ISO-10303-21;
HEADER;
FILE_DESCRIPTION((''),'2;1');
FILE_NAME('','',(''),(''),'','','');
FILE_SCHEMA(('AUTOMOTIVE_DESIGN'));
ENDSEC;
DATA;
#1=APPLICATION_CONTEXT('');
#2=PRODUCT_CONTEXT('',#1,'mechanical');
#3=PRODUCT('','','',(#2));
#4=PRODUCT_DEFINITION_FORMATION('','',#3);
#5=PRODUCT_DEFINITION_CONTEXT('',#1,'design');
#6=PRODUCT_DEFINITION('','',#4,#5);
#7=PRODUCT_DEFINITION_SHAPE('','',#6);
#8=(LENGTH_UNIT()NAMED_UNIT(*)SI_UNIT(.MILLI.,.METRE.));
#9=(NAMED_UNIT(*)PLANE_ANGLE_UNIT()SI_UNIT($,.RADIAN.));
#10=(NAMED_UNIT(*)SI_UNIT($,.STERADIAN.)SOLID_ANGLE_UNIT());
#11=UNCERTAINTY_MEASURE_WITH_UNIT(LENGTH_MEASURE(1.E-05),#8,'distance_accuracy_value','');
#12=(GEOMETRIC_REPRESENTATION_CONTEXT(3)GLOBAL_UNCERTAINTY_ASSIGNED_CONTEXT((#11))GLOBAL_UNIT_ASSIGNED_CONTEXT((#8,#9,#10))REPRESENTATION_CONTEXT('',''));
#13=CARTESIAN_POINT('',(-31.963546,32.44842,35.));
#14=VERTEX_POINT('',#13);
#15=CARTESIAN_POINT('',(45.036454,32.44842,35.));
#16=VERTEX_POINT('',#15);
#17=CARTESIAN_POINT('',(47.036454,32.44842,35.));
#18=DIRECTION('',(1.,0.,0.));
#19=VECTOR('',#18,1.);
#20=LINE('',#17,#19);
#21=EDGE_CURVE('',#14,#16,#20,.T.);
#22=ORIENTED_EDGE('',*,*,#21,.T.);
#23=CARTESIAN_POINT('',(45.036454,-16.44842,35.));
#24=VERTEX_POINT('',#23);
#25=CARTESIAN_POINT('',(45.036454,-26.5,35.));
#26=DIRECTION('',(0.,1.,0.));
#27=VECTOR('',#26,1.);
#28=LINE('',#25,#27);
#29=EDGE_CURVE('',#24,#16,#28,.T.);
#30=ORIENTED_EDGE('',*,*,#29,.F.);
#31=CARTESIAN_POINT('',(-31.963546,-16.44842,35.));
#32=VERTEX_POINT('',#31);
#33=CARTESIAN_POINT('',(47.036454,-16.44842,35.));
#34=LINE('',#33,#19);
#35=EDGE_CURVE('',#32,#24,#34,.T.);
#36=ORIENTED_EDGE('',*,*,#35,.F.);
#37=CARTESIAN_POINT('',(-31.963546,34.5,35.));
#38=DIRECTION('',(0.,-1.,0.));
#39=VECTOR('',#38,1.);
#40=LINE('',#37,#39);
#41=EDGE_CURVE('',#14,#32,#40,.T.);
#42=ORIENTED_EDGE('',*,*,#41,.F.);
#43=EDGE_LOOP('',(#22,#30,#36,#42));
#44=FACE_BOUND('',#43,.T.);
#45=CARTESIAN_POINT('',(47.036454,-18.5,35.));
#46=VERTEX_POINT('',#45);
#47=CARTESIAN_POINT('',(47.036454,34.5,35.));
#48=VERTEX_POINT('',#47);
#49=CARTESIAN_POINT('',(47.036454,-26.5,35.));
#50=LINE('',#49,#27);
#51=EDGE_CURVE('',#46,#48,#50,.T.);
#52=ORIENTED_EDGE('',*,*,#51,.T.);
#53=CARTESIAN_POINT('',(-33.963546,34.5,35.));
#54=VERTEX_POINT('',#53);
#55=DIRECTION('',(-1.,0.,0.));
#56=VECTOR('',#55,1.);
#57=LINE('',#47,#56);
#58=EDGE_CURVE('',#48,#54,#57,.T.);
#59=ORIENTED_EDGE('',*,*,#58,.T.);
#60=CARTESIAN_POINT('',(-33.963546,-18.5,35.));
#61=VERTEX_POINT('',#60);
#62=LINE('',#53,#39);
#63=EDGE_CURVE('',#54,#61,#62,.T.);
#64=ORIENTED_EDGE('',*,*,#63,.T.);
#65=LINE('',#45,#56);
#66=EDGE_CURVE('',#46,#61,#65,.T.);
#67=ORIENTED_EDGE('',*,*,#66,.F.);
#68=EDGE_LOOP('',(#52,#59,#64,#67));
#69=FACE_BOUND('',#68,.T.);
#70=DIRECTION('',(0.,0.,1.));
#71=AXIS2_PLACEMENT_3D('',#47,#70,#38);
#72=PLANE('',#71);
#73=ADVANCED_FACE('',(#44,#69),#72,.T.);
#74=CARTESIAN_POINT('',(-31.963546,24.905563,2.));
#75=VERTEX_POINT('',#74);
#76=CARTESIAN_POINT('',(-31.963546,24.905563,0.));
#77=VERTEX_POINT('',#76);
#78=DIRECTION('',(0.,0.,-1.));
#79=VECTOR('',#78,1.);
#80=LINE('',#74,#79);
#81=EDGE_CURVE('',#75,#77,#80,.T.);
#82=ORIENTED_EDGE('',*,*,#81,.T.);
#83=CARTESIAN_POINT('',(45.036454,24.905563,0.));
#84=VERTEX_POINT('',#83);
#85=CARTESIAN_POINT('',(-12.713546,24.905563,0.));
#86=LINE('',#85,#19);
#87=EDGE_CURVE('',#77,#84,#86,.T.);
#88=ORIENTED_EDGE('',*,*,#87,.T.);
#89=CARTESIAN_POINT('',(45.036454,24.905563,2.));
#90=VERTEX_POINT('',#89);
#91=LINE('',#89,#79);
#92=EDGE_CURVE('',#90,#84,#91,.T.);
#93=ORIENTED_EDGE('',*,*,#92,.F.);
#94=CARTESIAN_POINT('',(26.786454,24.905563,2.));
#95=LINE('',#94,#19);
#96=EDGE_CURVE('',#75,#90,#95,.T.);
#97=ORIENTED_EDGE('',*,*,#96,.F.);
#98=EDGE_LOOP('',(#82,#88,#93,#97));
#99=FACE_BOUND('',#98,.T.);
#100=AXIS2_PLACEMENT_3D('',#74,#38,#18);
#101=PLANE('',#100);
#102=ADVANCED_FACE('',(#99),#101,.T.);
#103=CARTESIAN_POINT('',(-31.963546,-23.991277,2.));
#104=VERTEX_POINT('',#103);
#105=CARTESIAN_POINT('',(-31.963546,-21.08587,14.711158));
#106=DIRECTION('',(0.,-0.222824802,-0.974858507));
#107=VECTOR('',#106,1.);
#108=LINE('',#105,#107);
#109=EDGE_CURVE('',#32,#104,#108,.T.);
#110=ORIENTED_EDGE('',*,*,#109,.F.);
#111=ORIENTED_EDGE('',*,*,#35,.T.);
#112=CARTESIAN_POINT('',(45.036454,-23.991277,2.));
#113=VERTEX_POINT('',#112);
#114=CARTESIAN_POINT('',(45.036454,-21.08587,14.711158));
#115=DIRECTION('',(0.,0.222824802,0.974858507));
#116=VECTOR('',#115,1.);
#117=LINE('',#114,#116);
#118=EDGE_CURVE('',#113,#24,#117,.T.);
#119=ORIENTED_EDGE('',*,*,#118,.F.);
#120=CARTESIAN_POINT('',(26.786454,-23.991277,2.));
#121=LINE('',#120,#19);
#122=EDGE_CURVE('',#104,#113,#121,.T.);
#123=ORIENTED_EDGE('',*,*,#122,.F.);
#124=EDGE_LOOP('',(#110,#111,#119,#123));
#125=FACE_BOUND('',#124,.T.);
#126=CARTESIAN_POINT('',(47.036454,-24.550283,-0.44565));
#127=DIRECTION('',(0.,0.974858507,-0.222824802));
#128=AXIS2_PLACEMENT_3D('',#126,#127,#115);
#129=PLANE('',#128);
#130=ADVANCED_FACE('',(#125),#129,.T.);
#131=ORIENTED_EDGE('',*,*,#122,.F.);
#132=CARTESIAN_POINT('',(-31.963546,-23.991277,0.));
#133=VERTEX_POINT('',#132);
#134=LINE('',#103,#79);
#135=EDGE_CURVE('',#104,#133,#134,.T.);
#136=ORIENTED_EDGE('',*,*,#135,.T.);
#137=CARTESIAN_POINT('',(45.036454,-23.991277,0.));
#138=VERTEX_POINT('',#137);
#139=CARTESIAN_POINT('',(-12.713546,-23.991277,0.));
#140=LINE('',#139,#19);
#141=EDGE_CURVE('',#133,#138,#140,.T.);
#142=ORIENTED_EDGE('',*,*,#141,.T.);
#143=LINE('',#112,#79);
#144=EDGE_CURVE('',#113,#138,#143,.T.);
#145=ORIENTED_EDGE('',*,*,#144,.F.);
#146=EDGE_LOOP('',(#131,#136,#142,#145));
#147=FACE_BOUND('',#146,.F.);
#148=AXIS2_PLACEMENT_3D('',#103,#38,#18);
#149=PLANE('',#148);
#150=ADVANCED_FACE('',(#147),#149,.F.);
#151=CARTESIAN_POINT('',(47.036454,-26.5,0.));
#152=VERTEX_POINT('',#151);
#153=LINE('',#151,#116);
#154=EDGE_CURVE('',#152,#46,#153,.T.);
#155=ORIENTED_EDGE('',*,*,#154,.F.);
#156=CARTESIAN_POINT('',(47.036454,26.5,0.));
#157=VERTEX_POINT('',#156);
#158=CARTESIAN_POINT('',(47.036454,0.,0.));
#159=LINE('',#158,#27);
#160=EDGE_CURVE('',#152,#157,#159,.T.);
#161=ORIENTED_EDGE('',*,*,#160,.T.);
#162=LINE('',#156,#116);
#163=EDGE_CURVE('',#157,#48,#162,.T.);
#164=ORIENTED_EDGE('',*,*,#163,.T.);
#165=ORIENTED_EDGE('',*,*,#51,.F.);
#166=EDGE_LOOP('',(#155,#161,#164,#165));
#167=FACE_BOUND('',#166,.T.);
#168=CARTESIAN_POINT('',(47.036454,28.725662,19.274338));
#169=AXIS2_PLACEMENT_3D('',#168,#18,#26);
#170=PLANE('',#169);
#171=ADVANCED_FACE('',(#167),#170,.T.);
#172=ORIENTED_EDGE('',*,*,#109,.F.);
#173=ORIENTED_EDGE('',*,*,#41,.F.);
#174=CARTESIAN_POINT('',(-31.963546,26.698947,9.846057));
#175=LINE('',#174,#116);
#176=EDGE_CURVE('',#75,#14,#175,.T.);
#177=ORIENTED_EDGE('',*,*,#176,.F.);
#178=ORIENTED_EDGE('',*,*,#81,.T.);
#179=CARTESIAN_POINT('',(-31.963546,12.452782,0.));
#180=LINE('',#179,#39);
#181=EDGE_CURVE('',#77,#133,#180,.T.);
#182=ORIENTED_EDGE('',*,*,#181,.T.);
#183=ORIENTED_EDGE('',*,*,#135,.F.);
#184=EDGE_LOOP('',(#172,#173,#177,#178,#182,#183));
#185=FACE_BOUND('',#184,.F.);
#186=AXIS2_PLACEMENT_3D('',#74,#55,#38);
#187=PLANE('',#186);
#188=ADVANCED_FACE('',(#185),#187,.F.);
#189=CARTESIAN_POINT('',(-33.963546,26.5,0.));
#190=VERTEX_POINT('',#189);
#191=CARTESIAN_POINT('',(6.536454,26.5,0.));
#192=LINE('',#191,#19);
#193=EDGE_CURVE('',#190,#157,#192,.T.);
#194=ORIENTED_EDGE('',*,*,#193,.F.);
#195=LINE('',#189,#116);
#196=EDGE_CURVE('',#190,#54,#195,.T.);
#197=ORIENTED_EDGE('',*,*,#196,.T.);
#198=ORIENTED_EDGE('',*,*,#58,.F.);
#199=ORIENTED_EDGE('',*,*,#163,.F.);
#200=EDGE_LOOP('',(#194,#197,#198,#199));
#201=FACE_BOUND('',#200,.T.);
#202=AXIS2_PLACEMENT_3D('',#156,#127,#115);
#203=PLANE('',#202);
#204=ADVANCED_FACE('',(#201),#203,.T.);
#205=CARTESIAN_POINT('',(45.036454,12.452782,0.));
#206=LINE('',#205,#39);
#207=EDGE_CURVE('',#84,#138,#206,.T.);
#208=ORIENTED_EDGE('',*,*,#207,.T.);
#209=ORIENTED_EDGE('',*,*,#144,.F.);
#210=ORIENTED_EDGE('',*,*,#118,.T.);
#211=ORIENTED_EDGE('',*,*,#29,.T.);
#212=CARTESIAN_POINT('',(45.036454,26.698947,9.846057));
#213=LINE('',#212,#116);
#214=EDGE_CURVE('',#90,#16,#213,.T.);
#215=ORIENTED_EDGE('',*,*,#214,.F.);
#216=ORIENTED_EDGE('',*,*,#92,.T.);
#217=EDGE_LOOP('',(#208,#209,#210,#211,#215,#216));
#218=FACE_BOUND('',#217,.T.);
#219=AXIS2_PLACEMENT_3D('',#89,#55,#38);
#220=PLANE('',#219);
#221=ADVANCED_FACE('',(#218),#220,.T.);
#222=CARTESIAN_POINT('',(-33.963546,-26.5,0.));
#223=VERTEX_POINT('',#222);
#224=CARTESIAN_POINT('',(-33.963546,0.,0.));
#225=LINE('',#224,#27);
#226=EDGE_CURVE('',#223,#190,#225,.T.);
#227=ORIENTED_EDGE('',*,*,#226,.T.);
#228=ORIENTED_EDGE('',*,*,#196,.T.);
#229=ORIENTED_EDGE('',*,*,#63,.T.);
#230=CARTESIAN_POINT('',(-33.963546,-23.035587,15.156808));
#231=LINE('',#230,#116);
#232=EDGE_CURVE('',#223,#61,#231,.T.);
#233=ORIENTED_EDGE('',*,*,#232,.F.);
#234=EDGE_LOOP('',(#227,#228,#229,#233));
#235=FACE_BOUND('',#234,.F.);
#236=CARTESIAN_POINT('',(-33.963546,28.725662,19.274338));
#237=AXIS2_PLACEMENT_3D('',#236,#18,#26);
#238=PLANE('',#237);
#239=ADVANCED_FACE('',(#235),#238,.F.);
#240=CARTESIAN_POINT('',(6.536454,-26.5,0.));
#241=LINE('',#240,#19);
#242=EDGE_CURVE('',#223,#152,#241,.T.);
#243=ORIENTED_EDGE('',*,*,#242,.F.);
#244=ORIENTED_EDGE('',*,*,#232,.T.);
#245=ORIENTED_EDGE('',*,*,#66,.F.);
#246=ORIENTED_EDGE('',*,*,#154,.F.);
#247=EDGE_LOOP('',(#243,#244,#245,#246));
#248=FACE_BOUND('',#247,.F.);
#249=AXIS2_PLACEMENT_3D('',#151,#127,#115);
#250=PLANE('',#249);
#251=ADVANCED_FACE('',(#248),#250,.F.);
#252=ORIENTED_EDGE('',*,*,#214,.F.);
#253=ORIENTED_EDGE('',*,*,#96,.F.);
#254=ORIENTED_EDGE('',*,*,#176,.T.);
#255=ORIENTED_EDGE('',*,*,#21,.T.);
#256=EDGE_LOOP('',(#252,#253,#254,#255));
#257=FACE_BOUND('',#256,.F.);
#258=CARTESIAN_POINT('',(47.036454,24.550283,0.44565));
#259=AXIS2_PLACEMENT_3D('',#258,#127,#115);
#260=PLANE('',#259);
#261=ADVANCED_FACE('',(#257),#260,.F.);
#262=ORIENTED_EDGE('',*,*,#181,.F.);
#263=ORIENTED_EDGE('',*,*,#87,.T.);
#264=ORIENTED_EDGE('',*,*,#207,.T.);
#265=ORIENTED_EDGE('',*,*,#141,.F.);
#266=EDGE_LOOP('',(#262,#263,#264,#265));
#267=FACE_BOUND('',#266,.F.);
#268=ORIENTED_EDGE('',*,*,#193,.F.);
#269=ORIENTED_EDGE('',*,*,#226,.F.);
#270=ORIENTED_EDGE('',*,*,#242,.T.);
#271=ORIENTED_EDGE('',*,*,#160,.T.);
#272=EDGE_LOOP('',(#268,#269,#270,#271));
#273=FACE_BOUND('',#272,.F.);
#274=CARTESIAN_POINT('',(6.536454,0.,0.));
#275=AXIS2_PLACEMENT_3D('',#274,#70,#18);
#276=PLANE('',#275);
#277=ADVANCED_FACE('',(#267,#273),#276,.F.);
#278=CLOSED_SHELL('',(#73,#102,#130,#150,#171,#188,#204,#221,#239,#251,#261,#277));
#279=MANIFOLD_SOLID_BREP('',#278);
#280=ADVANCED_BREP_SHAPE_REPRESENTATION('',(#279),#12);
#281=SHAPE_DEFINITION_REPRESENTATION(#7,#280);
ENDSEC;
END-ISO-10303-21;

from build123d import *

# Parameters (mm, degrees)
F0_W     = 81
F0_H     = 53
F1_DEPTH = 35
F3_DEPTH = 81
F4_DEPTH = 81.001
F5_T     = -2
F6_DEPTH = 25


with BuildPart() as f1:
    # F0 (on Top) → F1 (new body)
    with BuildSketch(Plane.XY):
        with Locations((6.5364544774, 0)):
            Rectangle(F0_W, F0_H)
    extrude(amount=F1_DEPTH)

    # F2 (on face) → F3 (join, through all)
    with BuildSketch(Plane.YZ.offset(47.0364544774)):
        Polygon((26.5, 35), (26.5, 0), (34.5, 35), align=None)
    extrude(amount=-F3_DEPTH)

    # F2 (on face) → F4 (cut, through all)
    with BuildSketch(Plane.YZ.offset(47.0364544774)):
        Polygon((-26.5, 35), (-26.5, 0), (-18.5, 35), align=None)
    extrude(amount=-F4_DEPTH, mode=Mode.SUBTRACT)

    # F5
    f5_openings = [f1.faces().sort_by_distance(p)[0] for p in [
        (6.536454, 8, 35),
    ]]
    offset(amount=F5_T, openings=f5_openings)

    # F6 (cut): a face of the model
    f6_faces = [f1.faces().sort_by_distance(p)[0] for p in [
        (6.5364544774, 0.4571428571, 2),
    ]]
    extrude(f6_faces, amount=-F6_DEPTH, mode=Mode.SUBTRACT)


solid = f1.part
